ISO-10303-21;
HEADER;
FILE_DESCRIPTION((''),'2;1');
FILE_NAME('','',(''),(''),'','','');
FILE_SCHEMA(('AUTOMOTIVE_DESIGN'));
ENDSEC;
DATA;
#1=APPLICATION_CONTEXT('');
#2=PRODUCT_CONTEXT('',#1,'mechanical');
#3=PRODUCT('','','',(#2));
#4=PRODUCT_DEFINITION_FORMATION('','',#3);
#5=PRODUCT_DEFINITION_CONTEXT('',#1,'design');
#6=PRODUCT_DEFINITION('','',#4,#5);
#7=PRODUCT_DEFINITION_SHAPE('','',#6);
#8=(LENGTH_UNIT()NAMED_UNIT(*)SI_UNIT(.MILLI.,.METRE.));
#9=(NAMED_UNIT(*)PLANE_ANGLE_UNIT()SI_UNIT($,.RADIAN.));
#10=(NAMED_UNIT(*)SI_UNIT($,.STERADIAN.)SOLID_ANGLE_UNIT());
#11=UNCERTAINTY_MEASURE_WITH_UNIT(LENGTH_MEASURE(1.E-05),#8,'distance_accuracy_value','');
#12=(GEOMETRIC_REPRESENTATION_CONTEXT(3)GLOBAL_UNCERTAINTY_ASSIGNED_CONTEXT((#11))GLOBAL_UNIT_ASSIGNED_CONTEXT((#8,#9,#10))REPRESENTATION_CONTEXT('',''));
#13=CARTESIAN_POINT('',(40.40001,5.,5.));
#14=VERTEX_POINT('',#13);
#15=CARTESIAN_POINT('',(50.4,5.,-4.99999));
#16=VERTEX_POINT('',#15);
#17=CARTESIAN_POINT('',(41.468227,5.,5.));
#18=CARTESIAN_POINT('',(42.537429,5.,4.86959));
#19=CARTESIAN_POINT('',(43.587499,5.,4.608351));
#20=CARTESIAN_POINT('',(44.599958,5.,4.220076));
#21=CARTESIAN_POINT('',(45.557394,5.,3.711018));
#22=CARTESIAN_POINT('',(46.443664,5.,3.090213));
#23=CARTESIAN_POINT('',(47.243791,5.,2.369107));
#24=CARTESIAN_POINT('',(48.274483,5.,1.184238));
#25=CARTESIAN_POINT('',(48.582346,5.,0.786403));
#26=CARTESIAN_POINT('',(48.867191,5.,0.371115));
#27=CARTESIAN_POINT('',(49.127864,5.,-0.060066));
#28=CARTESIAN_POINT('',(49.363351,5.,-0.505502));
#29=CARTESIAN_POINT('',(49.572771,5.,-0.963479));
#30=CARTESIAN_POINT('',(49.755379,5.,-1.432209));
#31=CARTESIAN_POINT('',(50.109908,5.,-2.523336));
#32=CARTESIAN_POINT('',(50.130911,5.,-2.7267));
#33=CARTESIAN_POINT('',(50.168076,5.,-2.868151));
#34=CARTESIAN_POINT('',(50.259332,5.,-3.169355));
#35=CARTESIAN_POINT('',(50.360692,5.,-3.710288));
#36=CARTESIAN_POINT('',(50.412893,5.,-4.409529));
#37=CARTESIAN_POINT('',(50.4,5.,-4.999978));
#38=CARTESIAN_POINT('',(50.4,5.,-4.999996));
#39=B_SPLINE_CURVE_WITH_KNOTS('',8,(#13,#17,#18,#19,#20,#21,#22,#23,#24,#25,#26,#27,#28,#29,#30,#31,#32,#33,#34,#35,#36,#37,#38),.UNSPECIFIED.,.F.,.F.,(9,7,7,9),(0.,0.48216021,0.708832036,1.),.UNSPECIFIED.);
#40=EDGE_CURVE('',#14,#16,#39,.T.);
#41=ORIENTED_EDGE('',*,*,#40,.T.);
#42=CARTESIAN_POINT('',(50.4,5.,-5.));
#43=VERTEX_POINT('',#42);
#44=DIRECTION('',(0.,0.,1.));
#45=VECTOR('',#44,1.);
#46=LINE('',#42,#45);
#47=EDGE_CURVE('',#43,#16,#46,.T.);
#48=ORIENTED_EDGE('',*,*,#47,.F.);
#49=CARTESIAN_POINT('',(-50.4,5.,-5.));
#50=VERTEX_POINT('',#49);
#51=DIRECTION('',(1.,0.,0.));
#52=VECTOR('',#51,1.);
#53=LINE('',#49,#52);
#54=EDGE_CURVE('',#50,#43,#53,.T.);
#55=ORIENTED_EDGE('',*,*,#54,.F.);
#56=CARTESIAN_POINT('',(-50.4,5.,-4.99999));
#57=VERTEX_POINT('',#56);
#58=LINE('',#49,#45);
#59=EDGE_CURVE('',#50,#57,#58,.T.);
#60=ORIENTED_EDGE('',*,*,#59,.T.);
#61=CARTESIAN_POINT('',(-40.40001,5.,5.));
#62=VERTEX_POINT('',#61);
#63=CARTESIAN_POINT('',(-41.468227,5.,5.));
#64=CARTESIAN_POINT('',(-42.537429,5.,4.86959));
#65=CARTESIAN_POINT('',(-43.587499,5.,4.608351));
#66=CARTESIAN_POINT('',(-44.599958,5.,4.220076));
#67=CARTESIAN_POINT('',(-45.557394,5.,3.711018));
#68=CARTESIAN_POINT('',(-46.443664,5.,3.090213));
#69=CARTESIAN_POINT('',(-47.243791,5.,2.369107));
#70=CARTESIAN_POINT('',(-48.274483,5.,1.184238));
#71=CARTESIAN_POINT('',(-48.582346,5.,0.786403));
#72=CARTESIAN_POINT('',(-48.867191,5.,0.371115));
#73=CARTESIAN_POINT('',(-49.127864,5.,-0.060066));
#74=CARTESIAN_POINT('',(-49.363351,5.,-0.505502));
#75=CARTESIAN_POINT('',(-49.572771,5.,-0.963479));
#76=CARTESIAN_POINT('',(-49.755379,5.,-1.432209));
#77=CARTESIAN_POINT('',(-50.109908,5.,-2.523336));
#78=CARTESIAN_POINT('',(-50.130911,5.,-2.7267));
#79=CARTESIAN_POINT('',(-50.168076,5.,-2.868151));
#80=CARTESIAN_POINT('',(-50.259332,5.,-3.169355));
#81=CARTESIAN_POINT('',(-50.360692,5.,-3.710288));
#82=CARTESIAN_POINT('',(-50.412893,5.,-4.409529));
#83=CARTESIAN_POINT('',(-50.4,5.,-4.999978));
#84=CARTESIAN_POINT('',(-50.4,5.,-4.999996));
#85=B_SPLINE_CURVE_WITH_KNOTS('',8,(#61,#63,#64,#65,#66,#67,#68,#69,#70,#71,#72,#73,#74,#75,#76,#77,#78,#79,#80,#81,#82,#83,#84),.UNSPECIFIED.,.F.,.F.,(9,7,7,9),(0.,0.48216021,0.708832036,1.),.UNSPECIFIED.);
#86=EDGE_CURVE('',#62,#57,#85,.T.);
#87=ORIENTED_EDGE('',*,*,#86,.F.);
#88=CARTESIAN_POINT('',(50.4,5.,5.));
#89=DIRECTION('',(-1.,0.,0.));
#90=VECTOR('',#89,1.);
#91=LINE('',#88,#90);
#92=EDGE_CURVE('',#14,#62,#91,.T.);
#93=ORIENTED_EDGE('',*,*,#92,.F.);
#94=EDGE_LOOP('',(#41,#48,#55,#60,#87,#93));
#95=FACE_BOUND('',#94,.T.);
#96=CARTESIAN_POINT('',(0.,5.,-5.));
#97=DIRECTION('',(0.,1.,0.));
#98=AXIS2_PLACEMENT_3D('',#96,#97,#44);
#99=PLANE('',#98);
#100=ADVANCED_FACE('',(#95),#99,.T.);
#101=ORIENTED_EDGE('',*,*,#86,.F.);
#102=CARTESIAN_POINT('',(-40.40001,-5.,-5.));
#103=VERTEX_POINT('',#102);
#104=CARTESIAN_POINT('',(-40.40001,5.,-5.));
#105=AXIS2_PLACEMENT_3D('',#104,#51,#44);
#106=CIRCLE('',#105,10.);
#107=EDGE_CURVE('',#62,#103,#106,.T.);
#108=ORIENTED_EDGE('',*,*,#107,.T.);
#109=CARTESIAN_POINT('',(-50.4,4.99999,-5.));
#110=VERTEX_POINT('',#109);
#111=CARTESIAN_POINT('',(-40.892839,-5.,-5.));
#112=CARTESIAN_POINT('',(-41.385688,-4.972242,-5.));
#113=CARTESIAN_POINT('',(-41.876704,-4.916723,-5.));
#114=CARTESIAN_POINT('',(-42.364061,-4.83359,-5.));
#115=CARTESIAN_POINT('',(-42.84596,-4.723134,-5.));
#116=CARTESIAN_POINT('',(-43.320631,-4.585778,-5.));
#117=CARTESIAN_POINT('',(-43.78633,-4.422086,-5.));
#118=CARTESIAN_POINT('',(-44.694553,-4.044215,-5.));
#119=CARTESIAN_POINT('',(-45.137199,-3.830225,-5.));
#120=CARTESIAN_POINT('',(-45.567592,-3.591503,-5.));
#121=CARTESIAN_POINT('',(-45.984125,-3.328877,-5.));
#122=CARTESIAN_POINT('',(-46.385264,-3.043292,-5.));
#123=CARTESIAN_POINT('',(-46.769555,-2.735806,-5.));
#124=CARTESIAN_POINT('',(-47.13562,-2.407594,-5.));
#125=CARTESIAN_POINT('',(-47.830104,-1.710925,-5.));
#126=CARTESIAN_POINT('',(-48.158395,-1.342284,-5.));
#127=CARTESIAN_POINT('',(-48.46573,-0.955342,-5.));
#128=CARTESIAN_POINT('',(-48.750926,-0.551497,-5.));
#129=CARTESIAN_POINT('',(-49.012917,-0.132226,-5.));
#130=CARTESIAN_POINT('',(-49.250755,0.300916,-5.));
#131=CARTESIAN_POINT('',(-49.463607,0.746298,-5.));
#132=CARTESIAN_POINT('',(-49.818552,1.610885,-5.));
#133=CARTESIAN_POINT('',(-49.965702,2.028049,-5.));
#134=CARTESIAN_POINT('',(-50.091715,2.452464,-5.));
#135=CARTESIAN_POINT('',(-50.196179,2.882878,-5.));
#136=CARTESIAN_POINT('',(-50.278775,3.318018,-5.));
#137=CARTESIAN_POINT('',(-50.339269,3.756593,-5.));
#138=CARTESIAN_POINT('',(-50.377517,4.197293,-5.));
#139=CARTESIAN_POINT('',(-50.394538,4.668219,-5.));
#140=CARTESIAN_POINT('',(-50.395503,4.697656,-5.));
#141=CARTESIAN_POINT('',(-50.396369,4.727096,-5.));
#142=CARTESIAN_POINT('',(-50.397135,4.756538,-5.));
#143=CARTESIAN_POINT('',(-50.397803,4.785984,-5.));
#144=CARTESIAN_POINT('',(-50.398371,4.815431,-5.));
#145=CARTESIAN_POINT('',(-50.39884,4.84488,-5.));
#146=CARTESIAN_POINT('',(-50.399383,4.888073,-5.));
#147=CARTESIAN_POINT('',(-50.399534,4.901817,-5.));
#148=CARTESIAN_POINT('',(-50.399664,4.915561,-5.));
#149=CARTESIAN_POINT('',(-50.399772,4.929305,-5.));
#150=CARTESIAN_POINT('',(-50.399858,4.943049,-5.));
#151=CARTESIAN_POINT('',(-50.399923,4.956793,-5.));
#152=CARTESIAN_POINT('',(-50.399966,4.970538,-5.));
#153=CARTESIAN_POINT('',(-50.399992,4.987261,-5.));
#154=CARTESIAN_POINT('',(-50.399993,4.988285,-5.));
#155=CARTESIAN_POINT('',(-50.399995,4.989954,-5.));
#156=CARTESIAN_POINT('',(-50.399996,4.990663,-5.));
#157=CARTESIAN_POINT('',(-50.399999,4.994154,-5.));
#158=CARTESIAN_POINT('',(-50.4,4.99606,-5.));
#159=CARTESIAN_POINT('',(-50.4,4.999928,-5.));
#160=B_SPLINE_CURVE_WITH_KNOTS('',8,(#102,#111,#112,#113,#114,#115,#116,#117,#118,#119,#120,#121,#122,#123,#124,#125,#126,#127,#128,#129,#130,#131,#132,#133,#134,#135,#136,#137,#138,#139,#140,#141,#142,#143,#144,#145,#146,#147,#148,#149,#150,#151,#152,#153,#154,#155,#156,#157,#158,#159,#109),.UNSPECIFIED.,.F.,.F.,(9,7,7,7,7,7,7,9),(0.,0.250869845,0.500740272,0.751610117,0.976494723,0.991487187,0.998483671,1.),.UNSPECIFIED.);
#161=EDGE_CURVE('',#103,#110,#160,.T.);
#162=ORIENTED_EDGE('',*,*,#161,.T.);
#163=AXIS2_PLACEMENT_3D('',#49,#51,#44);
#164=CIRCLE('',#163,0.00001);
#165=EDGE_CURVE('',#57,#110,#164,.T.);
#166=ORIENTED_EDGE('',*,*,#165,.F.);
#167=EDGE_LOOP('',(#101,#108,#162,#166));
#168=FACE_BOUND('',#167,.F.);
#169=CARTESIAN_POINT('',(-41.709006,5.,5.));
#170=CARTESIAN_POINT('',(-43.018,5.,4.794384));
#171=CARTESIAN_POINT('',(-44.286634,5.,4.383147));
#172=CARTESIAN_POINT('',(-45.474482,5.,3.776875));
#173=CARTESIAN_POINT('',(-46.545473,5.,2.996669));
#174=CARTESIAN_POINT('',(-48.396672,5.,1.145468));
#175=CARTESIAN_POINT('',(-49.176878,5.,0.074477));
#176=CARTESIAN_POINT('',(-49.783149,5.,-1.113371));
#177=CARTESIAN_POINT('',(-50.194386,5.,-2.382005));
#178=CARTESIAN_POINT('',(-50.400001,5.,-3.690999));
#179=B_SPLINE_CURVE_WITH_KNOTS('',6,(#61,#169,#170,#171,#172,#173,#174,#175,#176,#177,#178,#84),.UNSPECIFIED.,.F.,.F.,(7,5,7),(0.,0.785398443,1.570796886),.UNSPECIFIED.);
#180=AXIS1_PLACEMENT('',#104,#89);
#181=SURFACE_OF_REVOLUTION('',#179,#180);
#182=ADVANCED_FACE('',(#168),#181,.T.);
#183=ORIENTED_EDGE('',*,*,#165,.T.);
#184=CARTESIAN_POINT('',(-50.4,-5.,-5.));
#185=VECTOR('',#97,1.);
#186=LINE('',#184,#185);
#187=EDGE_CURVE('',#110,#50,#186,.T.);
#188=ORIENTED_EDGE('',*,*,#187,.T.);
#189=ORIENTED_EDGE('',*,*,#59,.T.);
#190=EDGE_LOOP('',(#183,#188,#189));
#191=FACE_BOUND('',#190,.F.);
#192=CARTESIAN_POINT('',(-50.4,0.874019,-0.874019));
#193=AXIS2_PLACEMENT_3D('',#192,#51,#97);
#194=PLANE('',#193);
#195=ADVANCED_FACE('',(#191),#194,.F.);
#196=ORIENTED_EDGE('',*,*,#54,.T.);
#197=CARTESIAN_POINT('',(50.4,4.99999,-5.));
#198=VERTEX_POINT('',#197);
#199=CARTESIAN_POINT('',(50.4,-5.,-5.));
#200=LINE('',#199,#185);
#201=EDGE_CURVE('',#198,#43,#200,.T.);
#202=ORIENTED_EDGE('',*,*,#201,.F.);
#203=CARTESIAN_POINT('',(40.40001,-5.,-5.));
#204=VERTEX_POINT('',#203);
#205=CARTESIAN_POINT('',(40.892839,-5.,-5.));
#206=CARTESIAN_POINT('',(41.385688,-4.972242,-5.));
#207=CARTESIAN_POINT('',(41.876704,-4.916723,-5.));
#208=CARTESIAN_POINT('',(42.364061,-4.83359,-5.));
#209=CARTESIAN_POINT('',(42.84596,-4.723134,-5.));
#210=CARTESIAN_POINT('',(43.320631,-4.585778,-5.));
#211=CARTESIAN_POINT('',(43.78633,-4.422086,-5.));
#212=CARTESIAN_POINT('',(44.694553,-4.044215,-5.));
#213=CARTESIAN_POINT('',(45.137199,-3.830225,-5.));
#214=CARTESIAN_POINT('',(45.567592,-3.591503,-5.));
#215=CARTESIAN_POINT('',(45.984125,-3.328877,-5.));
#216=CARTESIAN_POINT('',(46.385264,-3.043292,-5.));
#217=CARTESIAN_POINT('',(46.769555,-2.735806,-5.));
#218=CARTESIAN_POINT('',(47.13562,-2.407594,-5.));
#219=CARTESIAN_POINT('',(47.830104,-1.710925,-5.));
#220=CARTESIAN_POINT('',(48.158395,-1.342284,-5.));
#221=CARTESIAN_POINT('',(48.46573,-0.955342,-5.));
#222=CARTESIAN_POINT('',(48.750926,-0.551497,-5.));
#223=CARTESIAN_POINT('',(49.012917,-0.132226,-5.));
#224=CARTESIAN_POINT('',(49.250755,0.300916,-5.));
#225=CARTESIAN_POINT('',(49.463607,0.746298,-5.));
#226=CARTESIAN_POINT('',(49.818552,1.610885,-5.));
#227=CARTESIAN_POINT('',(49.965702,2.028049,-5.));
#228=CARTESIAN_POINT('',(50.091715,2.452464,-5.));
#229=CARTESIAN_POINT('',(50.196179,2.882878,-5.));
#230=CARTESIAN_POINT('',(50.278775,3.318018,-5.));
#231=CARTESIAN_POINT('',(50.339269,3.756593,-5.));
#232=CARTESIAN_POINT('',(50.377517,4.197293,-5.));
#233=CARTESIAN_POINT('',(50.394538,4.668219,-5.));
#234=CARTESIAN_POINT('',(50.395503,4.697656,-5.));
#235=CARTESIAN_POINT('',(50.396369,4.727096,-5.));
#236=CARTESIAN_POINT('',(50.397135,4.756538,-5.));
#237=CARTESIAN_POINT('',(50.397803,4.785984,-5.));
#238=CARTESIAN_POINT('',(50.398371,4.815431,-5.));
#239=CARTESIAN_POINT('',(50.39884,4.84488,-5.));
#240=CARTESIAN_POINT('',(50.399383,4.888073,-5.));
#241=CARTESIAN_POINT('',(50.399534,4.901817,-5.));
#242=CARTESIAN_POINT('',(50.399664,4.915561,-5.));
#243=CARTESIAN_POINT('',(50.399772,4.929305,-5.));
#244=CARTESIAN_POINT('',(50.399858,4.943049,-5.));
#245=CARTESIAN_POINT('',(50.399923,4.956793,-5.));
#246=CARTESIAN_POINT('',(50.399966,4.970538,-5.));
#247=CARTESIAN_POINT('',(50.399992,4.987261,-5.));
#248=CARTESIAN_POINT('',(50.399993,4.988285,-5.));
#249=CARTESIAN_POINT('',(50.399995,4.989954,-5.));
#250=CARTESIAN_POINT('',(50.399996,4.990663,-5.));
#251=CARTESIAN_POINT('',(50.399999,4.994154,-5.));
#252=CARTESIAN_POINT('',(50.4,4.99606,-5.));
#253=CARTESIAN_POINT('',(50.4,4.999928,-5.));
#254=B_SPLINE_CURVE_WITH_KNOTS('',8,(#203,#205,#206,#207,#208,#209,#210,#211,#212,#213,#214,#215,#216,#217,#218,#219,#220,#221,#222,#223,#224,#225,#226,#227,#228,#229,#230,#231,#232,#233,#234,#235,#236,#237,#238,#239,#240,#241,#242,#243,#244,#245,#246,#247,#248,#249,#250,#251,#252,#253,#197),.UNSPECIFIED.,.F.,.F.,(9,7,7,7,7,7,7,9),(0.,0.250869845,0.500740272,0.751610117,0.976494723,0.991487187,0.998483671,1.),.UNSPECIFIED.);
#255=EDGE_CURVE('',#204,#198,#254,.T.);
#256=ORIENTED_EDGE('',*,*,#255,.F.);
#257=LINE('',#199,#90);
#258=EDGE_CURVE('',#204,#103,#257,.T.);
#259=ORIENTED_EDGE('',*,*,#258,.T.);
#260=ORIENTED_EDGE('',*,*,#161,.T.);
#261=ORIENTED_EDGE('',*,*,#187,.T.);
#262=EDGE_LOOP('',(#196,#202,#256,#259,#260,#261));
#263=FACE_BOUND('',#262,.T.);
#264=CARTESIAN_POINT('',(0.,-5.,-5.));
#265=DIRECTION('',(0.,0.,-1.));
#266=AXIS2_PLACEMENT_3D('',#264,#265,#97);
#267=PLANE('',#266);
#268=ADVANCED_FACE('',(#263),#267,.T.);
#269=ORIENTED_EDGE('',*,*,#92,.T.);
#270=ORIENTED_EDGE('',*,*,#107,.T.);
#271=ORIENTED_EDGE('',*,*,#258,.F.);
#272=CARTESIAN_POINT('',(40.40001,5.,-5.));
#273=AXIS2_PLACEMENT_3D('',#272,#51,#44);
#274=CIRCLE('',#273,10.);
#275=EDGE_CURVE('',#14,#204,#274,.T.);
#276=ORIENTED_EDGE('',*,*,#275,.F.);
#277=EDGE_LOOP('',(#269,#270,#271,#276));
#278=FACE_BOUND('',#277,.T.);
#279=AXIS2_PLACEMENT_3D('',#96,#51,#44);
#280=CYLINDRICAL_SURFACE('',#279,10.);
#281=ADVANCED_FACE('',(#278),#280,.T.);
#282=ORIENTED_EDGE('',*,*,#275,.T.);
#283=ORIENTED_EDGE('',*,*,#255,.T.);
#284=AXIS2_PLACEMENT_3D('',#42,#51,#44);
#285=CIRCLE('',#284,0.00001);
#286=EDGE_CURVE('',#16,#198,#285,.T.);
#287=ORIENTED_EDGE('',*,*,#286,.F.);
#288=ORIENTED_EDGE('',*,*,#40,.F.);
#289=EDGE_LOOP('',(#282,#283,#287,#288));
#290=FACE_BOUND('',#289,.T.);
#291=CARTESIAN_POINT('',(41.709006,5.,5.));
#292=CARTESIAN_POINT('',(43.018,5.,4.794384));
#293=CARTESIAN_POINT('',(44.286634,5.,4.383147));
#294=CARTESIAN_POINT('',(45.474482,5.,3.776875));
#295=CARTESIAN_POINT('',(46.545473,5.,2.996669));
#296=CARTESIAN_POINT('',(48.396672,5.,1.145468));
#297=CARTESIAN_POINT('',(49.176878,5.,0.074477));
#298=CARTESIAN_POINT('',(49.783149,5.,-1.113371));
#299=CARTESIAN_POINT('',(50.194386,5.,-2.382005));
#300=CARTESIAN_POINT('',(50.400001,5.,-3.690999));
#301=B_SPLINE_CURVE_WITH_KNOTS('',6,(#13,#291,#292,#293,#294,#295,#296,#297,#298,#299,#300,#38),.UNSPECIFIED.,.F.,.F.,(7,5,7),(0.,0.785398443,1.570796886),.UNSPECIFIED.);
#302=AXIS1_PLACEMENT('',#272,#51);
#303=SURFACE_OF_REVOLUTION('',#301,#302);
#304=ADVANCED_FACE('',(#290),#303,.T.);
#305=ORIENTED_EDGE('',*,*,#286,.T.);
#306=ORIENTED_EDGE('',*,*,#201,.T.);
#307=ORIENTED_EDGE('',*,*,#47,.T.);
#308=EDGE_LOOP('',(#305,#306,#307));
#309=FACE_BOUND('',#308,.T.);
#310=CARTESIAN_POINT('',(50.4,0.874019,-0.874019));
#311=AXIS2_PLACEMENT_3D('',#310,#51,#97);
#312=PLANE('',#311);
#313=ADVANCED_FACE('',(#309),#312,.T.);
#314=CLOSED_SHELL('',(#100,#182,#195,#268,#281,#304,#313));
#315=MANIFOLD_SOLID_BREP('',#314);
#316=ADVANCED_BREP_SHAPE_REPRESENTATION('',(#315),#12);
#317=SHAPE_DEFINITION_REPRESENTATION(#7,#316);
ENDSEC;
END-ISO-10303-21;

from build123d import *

# Parameters (mm, degrees)
F1_DEPTH = 50.4
F2_R     = 9.99999


# Not quite as in the source:
# - a fillet or chamfer is up to 0.001 mm smaller than in the source, because OpenCascade refuses the exact size


with BuildPart() as f1:
    # F0 (on Right) → F1 (new body, symmetric)
    with BuildSketch(Plane.YZ):
        with BuildLine():
            Line((-5, -5), (5, -5))
            Line((5, -5), (5, 5))
            ThreePointArc((5, 5), (-2.0710678119, 2.0710678119), (-5, -5))
        make_face()
    extrude(amount=F1_DEPTH, both=True)

    # F2 (radius 10 in the source; OpenCascade refuses exactly that, so slightly less here)
    f2_edges = [f1.edges().sort_by_distance(p)[0] for p in [
        (50.4, -2.071068, 2.071068),
        (-50.4, -2.071068, 2.071068),
    ]]
    fillet(f2_edges, radius=F2_R)


solid = f1.part
